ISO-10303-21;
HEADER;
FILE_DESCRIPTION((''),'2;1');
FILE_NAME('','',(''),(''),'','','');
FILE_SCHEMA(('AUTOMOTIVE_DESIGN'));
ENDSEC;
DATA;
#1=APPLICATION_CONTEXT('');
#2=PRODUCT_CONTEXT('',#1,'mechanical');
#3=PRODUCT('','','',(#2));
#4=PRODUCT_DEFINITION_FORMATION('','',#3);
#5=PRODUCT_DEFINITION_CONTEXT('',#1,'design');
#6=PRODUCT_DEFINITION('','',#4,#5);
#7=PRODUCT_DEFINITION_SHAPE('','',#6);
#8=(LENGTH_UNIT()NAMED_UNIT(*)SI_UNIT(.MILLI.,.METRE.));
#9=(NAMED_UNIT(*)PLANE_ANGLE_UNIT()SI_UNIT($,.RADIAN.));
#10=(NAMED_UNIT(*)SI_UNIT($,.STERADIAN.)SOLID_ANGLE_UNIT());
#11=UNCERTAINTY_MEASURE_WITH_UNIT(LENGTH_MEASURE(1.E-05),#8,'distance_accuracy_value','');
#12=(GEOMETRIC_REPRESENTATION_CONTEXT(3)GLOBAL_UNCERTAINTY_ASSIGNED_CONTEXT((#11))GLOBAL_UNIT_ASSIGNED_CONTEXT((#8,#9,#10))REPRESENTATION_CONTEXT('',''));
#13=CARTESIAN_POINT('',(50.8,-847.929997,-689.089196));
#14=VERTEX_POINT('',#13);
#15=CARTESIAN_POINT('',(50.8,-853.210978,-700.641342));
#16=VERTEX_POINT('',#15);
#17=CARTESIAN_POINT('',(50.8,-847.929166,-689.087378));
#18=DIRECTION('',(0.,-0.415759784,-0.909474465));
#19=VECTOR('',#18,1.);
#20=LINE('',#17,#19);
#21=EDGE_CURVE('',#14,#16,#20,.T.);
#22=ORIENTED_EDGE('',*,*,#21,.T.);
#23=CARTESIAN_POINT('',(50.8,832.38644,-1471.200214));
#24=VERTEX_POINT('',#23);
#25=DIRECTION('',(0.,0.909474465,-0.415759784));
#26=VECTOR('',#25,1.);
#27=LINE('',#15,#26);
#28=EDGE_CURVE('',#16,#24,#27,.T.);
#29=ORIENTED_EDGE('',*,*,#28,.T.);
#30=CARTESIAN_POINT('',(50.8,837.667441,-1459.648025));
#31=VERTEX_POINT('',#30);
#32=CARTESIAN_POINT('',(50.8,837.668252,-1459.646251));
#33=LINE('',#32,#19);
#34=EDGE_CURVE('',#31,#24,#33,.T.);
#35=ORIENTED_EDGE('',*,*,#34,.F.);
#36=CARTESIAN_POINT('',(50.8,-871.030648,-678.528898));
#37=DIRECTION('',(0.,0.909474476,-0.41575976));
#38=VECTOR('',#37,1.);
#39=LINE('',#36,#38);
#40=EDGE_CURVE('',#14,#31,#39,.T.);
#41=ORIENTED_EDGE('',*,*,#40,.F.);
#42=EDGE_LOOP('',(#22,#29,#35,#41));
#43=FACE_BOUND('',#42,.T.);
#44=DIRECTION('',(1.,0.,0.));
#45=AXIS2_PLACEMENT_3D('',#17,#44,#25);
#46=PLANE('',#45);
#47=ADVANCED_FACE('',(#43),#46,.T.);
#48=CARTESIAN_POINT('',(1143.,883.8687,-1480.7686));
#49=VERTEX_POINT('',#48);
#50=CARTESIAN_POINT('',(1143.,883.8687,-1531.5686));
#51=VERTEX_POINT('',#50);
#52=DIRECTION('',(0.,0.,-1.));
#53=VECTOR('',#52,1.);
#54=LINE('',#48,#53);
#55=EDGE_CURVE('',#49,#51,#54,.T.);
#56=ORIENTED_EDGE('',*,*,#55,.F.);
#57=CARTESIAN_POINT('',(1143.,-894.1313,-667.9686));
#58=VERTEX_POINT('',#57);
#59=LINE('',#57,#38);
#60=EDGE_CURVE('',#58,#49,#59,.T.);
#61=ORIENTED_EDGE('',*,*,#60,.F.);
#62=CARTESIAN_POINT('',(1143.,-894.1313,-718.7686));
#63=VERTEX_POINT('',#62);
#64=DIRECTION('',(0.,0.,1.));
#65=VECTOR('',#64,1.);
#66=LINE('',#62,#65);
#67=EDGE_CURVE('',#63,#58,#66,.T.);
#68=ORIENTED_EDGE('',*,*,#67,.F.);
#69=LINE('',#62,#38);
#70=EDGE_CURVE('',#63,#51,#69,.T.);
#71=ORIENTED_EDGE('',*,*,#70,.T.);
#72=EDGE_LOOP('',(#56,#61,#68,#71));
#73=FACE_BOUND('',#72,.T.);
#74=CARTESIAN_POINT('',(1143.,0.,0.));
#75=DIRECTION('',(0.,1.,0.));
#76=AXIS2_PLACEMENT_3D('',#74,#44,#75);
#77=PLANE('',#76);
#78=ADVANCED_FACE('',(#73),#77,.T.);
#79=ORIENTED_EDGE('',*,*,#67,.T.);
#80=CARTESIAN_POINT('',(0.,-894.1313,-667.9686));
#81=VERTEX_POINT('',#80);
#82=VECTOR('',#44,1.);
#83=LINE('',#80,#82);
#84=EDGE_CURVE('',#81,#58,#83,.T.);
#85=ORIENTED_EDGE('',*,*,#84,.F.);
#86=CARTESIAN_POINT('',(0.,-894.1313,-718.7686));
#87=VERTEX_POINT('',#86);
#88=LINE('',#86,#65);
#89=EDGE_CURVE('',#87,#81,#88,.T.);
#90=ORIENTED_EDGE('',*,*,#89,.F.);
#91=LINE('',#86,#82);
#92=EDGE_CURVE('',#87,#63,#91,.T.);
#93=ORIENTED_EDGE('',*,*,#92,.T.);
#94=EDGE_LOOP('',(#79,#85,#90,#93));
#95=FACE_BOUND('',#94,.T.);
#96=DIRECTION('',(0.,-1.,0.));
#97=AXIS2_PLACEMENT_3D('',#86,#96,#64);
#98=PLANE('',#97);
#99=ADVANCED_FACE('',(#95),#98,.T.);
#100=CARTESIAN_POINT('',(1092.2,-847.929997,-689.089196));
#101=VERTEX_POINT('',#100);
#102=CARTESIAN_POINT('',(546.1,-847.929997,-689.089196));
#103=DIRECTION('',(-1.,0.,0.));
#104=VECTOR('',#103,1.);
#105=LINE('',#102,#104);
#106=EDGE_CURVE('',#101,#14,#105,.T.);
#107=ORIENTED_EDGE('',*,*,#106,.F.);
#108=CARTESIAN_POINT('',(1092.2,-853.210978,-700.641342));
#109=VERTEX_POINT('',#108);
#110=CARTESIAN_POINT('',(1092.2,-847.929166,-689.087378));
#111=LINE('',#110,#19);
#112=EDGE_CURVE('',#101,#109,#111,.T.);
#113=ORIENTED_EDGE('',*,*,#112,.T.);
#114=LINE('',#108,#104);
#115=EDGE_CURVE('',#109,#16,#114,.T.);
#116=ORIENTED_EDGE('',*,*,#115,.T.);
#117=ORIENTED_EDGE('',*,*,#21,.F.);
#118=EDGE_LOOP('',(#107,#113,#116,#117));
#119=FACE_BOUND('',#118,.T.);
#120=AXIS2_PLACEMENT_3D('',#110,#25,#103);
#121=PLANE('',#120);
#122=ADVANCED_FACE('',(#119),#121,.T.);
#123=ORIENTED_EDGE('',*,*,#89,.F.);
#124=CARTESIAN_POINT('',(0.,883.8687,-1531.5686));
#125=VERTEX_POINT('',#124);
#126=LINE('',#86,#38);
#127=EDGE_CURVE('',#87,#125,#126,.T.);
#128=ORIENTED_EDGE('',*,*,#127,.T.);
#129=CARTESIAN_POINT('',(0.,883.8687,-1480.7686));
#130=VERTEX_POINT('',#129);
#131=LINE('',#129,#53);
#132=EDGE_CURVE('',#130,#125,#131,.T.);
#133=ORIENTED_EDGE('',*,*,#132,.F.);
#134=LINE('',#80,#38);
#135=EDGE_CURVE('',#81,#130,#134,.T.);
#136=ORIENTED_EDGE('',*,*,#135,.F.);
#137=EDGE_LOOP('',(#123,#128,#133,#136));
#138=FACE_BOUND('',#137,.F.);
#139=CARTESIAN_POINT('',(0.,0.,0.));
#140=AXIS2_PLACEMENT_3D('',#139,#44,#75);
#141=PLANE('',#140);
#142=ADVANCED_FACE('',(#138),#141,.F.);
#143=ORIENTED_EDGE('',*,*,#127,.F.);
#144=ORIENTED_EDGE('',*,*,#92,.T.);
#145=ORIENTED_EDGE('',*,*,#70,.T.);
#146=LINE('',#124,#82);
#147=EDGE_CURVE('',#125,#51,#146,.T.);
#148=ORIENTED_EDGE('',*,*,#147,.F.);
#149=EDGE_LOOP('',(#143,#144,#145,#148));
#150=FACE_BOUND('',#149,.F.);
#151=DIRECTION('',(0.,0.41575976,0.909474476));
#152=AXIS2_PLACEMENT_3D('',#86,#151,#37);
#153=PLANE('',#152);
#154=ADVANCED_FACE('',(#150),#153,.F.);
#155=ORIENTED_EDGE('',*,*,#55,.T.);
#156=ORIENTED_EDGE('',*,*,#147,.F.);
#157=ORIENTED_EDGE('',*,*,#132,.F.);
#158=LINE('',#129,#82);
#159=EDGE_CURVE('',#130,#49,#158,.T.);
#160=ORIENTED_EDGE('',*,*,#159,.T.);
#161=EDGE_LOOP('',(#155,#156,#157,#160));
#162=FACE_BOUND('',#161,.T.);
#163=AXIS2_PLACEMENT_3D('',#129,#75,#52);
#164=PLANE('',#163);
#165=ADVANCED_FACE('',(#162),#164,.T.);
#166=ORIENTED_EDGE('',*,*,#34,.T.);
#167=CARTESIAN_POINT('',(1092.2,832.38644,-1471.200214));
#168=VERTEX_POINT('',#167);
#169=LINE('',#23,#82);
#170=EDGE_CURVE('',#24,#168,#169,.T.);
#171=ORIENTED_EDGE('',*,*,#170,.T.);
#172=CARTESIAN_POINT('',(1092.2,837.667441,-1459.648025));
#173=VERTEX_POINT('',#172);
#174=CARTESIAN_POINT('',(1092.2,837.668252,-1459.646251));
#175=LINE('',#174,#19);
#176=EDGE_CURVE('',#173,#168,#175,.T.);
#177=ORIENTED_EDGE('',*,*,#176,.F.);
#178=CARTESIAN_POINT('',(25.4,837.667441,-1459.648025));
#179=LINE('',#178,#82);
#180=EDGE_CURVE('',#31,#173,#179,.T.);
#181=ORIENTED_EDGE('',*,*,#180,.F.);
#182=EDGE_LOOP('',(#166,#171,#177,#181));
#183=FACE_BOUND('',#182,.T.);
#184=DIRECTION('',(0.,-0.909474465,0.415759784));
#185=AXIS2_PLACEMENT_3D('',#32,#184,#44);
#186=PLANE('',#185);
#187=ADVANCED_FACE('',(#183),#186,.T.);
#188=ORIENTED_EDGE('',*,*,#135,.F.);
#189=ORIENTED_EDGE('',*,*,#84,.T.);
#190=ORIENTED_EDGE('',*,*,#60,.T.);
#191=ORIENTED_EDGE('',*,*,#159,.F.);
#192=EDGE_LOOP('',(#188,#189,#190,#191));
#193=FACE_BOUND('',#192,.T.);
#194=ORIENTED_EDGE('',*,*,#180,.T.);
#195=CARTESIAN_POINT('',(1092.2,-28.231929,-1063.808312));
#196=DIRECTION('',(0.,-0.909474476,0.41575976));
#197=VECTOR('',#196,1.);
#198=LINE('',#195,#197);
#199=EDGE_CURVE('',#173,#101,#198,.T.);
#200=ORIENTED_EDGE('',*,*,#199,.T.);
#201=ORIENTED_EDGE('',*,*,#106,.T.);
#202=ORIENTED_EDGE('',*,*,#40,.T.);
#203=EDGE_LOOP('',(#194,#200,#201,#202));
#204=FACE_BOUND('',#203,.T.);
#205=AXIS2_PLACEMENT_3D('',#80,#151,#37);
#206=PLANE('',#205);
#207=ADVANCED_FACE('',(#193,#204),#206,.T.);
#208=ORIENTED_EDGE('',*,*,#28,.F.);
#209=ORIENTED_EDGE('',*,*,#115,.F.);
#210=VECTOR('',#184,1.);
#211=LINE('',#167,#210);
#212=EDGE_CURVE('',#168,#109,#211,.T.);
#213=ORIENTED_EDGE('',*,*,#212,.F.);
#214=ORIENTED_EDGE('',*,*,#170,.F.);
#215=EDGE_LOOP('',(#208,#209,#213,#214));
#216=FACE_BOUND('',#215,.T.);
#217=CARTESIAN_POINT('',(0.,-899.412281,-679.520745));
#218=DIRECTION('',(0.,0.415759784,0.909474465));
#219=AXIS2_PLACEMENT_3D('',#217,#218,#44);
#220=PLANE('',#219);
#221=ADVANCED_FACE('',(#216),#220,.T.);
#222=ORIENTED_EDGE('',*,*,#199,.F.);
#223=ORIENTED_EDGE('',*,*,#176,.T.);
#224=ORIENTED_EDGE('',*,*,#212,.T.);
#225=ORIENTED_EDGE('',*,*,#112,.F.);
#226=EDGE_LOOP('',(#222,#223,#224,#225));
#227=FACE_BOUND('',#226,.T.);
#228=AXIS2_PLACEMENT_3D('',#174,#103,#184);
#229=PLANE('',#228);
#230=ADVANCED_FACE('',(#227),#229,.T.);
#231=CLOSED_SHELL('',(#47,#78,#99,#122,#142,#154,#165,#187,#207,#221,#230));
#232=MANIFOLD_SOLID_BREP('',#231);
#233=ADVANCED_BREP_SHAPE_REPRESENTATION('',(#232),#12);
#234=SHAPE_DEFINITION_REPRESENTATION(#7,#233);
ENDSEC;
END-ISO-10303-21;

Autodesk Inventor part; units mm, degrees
ref_plane "YZ Plane" through (0, 0, 0) normal (1, 0, 0) x (0, 1, 0)
ref_plane "XZ Plane" through (0, 0, 0) normal (0, 1, 0) x (-1, 0, 0)
ref_plane "XY Plane" through (0, 0, 0) normal (0, 0, 1) x (1, 0, 0)
sketch "Sketch2" plane through (0, 0, 0) normal (1, 0, 0) x (0, 1, 0)
  line L0 (-894.1313, -718.7686) -> (883.8687, -1531.5686)
  line L1 (-894.1313, -667.9686) -> (883.8687, -1480.7686)
  line L2 (-894.1313, -667.9686) -> (883.8687, -667.9686)
  line L3 (-894.1313, -718.7686) -> (-894.1313, -667.9686)
  line L4 (883.8687, -1480.7686) -> (883.8687, -1531.5686)
  point P0 (0, 0)
  dimension "d4" = 1778
  dimension "d5" = 50.8
  dimension "d6" = 50.8
  dimension "d7" = 812.8
extrude "Extrusion2" add sketch "Sketch2" along normal blind 1143
sketch "Sketch3" plane through (0, -894.1313, -667.9686) normal (0, 0.4157598, 0.9094745) x (1, 0, 0)
  line L0 (50.8, 1904.1752) -> (1092.2, 1904.1752)
  line L1 (1092.2, 1904.1752) -> (1092.2, 50.8)
  line L2 (1092.2, 50.8) -> (50.8, 50.8)
  line L3 (50.8, 50.8) -> (50.8, 1904.1752)
  line L4 (0, 0) -> (1143, 0) projected
  line L5 (1143, 1954.9752) -> (1143, 0) projected
  line L6 (0, 1954.9752) -> (0, 0) projected
  line L7 (0, 1954.9752) -> (1143, 1954.9752) projected
  point P0 (0, 535.4751)
  dimension "d10" = 50.8
  dimension "d11" = 50.8
  dimension "d12" = 50.8
  dimension "d13" = 50.8
extrude "Extrusion3" cut sketch "Sketch3" against normal blind 12.7 contours L0 L1 L2 L3
equation "\"BendRadius\" = Thickness"
equation "\"BendReliefWidth\" = Thickness"
equation "\"BendReliefDepth\" = 0.5 * Thickness"
equation "\"CornerReliefSize\" = 4 * Thickness"
equation "\"MinimumRemnant\" = 2 * Thickness"
equation "\"TransitionRadius\" = BendRadius"
equation "\"JacobiRadiusSize\" = BendRadius"
equation "\"GapSize\" = Thickness"
equation "\"Thickness\" = 3.048"
properties part number "screen"
